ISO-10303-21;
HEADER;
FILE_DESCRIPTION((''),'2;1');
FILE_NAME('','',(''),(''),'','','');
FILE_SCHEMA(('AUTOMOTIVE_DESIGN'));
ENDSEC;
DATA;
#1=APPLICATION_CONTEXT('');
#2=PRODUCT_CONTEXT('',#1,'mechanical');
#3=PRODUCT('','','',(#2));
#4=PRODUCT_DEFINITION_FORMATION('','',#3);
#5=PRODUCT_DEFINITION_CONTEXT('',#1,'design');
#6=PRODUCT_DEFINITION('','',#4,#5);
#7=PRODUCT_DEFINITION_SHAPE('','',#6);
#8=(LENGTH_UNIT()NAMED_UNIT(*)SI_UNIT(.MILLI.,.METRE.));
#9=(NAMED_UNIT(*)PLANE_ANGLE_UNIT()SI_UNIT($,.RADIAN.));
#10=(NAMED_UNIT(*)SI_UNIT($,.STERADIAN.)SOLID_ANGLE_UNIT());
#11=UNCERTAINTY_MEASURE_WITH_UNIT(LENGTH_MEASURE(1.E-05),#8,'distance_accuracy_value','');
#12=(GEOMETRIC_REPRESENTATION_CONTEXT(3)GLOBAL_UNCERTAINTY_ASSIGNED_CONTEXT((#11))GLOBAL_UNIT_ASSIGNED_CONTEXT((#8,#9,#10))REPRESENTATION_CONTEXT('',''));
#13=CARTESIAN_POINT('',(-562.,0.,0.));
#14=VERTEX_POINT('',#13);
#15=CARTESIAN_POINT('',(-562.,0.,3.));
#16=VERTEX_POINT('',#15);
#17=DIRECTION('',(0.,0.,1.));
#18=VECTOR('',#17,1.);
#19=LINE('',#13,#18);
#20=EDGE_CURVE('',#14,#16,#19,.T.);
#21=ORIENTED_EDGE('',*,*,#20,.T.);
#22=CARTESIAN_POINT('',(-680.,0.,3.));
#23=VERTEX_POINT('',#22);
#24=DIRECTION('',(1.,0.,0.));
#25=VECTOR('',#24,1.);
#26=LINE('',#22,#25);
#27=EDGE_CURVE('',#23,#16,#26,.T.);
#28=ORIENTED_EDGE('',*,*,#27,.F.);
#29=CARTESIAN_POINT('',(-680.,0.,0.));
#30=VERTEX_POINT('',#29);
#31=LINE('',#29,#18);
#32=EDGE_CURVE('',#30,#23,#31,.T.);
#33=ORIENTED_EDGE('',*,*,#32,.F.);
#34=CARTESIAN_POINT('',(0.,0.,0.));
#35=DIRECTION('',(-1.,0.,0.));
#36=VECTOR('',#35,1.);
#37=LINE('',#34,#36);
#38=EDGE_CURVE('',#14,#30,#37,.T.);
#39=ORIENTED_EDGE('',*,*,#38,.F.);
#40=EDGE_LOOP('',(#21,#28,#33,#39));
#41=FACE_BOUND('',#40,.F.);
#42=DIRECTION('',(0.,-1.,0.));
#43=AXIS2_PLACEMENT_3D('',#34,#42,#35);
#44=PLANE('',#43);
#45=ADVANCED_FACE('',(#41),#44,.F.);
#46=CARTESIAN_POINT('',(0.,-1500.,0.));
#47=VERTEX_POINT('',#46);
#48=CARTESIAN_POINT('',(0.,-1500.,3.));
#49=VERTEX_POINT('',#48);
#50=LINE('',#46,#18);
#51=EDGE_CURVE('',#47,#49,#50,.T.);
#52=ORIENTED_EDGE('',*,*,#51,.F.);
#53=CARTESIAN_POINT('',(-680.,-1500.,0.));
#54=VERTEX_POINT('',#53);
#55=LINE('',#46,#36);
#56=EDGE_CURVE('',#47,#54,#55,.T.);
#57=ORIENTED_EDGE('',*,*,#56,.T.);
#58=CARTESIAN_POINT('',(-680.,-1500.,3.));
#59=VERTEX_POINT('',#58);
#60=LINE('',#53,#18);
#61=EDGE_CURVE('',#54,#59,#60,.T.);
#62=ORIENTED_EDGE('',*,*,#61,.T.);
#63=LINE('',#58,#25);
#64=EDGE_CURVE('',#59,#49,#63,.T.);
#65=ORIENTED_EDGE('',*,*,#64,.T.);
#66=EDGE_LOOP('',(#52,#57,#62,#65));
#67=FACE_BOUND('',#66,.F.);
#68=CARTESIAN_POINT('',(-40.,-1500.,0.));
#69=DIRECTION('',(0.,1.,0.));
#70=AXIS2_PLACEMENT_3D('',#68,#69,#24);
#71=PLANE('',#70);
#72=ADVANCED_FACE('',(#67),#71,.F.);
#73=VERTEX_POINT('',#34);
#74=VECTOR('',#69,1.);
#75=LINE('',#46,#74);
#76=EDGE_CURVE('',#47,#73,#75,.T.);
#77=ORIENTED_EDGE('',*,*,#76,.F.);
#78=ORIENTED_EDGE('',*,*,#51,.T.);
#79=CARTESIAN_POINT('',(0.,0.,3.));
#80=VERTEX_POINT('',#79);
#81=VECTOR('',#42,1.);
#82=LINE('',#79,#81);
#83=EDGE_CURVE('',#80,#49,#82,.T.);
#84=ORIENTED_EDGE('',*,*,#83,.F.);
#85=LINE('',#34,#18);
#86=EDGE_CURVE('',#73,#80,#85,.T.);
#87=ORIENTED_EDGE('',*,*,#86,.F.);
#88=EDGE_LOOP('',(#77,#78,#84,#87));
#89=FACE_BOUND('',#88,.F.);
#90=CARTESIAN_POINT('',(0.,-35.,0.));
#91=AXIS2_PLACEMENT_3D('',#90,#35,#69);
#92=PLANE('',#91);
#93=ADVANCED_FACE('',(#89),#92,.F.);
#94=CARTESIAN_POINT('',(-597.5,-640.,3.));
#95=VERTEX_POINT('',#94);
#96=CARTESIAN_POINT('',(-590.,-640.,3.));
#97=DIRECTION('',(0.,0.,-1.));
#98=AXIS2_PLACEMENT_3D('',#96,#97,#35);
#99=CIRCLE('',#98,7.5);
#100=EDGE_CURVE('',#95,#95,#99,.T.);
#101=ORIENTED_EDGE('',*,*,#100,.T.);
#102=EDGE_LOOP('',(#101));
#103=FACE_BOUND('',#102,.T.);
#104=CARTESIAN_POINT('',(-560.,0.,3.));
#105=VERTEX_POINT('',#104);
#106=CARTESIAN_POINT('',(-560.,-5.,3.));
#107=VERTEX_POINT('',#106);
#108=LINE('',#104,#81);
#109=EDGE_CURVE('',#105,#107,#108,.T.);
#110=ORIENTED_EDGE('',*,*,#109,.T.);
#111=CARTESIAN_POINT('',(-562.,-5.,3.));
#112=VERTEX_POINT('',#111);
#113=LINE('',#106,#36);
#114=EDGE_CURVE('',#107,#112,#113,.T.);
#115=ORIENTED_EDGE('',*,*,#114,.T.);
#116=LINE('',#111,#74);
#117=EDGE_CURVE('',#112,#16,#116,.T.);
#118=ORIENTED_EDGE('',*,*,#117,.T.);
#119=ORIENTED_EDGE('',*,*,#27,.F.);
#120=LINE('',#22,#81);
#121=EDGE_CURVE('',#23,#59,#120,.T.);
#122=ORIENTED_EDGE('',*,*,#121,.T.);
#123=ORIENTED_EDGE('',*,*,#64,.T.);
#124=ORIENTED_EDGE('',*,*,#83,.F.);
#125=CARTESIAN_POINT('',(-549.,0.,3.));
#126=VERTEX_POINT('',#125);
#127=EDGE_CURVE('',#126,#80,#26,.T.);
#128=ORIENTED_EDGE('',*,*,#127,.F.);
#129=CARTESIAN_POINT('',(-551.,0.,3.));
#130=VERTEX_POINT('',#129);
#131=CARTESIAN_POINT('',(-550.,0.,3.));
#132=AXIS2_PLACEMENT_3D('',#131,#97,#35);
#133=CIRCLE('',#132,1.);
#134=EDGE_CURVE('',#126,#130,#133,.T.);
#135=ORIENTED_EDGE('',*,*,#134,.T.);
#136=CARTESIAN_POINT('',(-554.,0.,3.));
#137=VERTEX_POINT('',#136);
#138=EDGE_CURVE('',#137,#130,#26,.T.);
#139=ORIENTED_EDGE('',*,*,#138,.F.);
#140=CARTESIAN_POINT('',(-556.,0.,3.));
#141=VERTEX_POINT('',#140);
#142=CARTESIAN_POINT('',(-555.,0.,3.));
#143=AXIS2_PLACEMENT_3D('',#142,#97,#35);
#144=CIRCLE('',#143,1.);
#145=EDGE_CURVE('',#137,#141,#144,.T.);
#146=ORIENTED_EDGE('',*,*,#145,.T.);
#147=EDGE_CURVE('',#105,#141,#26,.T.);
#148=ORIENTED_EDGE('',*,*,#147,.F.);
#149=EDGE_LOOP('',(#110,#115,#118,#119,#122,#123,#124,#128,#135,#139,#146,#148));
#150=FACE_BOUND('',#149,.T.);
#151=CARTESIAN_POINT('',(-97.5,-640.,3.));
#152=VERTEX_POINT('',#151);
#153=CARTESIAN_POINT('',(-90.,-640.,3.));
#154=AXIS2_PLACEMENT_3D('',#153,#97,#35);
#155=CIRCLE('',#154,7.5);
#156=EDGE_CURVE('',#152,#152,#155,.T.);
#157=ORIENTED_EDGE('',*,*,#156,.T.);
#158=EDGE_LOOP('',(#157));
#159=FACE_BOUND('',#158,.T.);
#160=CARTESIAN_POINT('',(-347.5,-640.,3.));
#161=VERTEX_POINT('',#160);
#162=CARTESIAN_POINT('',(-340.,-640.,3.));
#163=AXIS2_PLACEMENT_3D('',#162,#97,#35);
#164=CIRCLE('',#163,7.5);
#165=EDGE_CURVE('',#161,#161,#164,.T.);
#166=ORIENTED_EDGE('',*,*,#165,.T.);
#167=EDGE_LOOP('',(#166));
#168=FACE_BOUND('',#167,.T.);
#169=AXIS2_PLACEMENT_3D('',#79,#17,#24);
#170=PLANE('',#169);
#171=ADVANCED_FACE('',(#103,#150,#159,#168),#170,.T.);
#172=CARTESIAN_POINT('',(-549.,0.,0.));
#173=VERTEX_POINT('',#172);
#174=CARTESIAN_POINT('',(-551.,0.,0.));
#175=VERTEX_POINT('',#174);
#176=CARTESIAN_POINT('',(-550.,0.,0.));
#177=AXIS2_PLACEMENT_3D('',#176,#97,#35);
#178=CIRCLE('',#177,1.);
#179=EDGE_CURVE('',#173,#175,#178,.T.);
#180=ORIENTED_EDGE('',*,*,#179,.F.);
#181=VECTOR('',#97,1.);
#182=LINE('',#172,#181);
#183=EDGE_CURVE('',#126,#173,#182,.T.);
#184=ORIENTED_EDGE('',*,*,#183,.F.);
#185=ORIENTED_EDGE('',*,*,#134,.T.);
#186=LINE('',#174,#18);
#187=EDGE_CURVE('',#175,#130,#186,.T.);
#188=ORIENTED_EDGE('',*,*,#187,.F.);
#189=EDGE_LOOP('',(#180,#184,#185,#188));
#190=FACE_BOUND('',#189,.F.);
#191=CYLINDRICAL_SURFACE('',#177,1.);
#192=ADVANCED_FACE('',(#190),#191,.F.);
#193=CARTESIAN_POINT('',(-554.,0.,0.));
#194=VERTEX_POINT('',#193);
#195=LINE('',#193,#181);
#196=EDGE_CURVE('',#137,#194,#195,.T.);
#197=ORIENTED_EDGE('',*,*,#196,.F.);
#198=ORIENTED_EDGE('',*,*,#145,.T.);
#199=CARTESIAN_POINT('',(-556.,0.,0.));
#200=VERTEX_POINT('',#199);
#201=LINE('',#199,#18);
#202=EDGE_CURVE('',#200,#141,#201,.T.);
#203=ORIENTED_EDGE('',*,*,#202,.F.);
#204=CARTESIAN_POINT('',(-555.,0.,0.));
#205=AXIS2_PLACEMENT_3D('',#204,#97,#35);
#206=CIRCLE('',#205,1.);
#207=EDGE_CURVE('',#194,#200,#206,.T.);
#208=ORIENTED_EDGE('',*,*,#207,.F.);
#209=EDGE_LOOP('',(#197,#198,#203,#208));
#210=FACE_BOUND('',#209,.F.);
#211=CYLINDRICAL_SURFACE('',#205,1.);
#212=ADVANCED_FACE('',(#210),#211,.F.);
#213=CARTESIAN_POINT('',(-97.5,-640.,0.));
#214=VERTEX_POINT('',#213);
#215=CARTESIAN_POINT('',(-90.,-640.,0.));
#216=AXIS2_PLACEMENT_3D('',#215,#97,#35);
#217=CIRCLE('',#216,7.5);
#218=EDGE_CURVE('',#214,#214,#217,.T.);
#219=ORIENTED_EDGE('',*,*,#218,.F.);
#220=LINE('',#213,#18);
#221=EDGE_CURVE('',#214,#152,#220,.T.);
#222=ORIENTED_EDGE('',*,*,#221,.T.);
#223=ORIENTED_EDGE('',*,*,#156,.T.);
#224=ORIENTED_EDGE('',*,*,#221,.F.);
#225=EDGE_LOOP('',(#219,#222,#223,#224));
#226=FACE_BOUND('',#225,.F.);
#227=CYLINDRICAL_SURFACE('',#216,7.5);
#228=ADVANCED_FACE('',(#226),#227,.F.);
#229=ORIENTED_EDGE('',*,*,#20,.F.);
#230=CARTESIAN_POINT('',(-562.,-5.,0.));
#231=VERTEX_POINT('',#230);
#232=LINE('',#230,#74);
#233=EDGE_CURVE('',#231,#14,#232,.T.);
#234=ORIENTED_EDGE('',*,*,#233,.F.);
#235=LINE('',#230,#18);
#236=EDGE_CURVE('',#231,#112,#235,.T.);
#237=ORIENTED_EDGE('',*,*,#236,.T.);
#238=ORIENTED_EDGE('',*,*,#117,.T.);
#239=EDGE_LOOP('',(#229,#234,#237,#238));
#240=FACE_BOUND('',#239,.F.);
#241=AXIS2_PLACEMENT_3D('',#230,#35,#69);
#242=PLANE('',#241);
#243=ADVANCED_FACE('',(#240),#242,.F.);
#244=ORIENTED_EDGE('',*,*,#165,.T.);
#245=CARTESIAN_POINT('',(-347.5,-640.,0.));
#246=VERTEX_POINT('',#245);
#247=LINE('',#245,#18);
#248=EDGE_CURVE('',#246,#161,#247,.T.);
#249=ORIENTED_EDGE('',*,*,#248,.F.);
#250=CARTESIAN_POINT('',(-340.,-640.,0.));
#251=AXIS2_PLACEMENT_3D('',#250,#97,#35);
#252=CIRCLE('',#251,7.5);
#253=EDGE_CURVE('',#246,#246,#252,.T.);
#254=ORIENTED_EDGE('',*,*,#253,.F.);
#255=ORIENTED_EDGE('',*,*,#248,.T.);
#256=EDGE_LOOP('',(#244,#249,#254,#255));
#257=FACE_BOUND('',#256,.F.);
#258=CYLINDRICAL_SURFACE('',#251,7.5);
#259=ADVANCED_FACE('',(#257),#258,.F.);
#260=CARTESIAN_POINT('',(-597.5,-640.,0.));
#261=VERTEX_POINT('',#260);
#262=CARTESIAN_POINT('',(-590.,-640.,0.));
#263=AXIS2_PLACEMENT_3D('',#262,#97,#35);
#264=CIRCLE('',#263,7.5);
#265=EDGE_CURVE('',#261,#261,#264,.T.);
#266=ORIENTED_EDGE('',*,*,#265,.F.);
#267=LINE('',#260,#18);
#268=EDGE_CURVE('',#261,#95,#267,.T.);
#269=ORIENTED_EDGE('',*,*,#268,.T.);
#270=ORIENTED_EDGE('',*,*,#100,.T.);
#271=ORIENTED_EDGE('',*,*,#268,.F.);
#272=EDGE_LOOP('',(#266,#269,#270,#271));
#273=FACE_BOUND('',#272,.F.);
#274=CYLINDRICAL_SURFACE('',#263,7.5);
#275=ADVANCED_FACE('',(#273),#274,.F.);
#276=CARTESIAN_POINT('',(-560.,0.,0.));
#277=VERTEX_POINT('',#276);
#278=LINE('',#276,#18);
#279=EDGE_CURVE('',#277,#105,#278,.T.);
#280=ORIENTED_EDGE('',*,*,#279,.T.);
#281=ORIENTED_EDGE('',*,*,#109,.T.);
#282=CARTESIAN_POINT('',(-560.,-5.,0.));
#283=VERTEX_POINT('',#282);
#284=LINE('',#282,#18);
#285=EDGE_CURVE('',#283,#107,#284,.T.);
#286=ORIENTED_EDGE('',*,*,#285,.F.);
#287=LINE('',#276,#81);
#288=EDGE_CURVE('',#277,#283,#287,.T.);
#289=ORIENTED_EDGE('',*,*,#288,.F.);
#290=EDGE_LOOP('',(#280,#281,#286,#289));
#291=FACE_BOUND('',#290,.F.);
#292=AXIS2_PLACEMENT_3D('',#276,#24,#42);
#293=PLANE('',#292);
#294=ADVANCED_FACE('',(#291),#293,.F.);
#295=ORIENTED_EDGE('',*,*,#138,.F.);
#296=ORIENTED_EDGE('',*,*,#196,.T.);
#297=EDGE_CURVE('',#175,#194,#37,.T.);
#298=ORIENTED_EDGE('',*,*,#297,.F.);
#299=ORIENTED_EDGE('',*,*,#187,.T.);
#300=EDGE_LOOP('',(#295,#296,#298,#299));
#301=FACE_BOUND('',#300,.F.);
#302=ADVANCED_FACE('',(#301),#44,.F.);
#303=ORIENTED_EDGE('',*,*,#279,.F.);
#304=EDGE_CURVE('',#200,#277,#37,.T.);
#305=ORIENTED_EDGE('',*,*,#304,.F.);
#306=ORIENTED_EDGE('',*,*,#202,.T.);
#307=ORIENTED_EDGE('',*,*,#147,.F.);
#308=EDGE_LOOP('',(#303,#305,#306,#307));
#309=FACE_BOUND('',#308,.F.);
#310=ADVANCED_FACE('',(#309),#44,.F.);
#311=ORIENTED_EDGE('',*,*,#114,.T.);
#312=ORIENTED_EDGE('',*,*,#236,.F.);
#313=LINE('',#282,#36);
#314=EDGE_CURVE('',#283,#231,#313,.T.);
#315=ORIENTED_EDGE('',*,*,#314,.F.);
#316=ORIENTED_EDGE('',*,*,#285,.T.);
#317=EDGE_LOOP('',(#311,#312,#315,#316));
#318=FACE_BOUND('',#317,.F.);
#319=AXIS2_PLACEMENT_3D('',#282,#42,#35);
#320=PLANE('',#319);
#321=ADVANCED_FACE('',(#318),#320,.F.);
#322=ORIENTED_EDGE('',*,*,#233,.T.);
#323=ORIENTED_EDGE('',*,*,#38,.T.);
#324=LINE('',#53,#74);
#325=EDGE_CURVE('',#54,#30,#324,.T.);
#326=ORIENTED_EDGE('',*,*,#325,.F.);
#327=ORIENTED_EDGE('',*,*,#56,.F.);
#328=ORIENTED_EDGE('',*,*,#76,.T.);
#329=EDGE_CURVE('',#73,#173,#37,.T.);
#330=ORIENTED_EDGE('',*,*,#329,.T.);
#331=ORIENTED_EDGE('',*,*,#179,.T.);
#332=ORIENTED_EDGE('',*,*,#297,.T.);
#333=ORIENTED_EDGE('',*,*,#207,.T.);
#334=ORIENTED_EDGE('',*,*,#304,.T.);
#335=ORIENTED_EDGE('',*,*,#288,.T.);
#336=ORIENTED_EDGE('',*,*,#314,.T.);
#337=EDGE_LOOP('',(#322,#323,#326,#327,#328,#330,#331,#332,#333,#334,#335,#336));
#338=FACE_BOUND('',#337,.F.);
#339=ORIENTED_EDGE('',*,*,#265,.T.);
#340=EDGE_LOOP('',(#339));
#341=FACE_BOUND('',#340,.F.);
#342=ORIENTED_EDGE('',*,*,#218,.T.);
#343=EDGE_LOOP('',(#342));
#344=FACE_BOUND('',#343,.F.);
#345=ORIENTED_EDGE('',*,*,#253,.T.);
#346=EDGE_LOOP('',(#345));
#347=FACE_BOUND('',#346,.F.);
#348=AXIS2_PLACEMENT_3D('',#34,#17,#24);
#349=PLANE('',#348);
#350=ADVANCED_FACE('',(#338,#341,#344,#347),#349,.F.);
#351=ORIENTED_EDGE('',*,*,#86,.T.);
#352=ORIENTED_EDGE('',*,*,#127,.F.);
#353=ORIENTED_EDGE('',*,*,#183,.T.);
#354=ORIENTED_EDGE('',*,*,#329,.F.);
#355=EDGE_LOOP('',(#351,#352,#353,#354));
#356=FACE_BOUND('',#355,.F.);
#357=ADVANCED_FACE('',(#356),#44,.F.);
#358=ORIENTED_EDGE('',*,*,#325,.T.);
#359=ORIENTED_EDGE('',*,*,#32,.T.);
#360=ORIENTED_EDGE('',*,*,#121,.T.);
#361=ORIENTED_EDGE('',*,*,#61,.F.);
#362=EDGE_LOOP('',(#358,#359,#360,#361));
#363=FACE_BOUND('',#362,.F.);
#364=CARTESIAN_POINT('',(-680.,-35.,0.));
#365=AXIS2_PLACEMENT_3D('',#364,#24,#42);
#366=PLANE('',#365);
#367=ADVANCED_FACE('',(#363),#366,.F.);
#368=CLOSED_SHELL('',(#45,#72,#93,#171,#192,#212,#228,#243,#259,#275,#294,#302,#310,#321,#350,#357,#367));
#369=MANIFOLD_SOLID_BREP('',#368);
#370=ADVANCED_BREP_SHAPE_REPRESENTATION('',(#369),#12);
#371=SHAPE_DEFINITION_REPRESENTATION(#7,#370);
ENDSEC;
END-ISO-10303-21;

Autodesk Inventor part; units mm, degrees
ref_plane "YZ Plane" through (0, 0, 0) normal (1, 0, 0) x (0, 1, 0)
ref_plane "XZ Plane" through (0, 0, 0) normal (0, 1, 0) x (-1, 0, 0)
ref_plane "XY Plane" through (0, 0, 0) normal (0, 0, 1) x (1, 0, 0)
sketch "Sketch1" plane through (0, 0, 0) normal (0, 0, 1) x (1, 0, 0)
  line L0 (0, 0) -> (-680, 0)
  line L1 (-680, 0) -> (-680, -1500)
  line L2 (-680, -1500) -> (0, -1500)
  line L3 (0, -1500) -> (0, 0)
  line L4 (0, 0) -> (-40, 0)
  line L5 (-40, 0) -> (-40, -35)
  line L6 (-40, -35) -> (0, -35)
  line L7 (0, -35) -> (0, 0)
  line L8 (0, -1500) -> (-40, -1500)
  line L9 (-40, -1500) -> (-40, -1465)
  line L10 (-40, -1465) -> (0, -1465)
  line L11 (0, -1465) -> (0, -1500)
  line L12 (-680, 0) -> (-640, 0)
  line L13 (-640, 0) -> (-640, -35)
  line L14 (-640, -35) -> (-680, -35)
  line L15 (-680, -35) -> (-680, 0)
  line L16 (-680, -1500) -> (-640, -1500)
  line L17 (-640, -1500) -> (-640, -1465)
  line L18 (-640, -1465) -> (-680, -1465)
  line L19 (-680, -1465) -> (-680, -1500)
  line L20 (-240, -1500) -> (-140, -1500)
  line L21 (-140, -1500) -> (-140, -1465)
  line L22 (-140, -1465) -> (-240, -1465)
  line L23 (-240, -1465) -> (-240, -1500)
  line L24 (-240, 0) -> (-140, 0)
  line L25 (-140, 0) -> (-140, -35)
  line L26 (-140, -35) -> (-240, -35)
  line L27 (-240, -35) -> (-240, 0)
  point P0 (0, -35)
  point P1 (-40, 0)
  point P2 (-40, -1500)
  point P3 (0, -1465)
  point P4 (-140, -1500)
  point P5 (-140, 0)
  point P6 (-640, 0)
  point P7 (-680, -35)
  point P8 (-300, -35)
  point P9 (-300, 0)
  point P10 (-260, -2265)
  point P11 (-260, -2300)
  point P12 (-260, -35)
  point P13 (-260, 0)
  point P14 (-300, -2265)
  point P15 (-300, -2300)
  point P16 (-240, 0)
  dimension "d22" = 680
  dimension "d23" = 1500
  dimension "d24" = 40
  dimension "d25" = 35
  dimension "d28" = 100
  dimension "d29" = 100
extrude "Plate1" add sketch "Sketch1" along normal blind 3
sketch "Sketch5" plane through (0, 0, 0) normal (0, 0, -1) x (-1, 0, 0)
  line L0 (680, 0) -> (580, 0) construction
  line L1 (580, 0) -> (580, -2) construction
  line L2 (580, -2) -> (680, -2) construction
  line L3 (680, -2) -> (680, 0) construction
  line L4 (580, 0) -> (578.4752, -4.6556)
  arc A0 (577.5248, -4.6556) -> (578.4752, -4.6556) centre (578, -4.5) ccw
  line L5 (577.5248, -4.6556) -> (576, 0)
  line L6 (576, 0) -> (580, 0)
  line L7 (576, 0) -> (574, 0) construction
  line L8 (574, 0) -> (572, 0)
  line L9 (572, 0) -> (572, -5)
  line L10 (572, -5) -> (574, -5)
  line L11 (574, -5) -> (574, 0)
  line L12 (572, 0) -> (570, 0) construction
  line L13 (570, 0) -> (568, 0)
  line L14 (568, 0) -> (568, -5)
  line L15 (568, -5) -> (570, -5)
  line L16 (570, -5) -> (570, 0)
  line L17 (568, 0) -> (566, 0) construction
  line L18 (566, 0) -> (564, 0)
  line L19 (564, 0) -> (564, -5)
  line L20 (564, -5) -> (566, -5)
  line L21 (566, -5) -> (566, 0)
  line L22 (564, 0) -> (562, 0) construction
  line L23 (562, 0) -> (560, 0)
  line L24 (560, 0) -> (560, -5)
  line L25 (560, -5) -> (562, -5)
  line L26 (562, -5) -> (562, 0)
  line L27 (560, 0) -> (555, 0) construction
  line L28 (555, 0) -> (550, 0) construction
  circle A1 centre (555, 0) radius 1
  circle A2 centre (550, 0) radius 1
  point P0 (0, 0)
  point P1 (578, 0)
  dimension "d30" = 100
  dimension "d31" = 2
  dimension "d32" = 5
  dimension "d33" = 4
  dimension "d34" = 0.5
  dimension "d35" = 5
  dimension "d36" = 5
  dimension "d37" = 5
  dimension "d38" = 2
extrude "Cut1" cut sketch "Sketch5" against normal blind 3 contours L26 L25 L24 L23 | A1 | A2
sketch "Sketch6" plane through (0, 0, 0) normal (0, 0, -1) x (-1, 0, 0)
  circle A0 centre (340, -640) radius 7.5
  arc A1 (549, 0) -> (551, 0) centre (550, 0) ccw projected
  line L0 (554, 0) -> (551, 0) projected
  arc A2 (554, 0) -> (556, 0) centre (555, 0) ccw projected
  line L1 (560, 0) -> (556, 0) projected
  line L2 (560, 0) -> (560, -5) projected
  line L3 (560, -5) -> (562, -5) projected
  line L4 (562, -5) -> (562, 0) projected
  line L5 (680, 0) -> (562, 0) projected
  line L6 (680, -1500) -> (680, 0) projected
  line L7 (0, -1500) -> (680, -1500) projected
  line L8 (0, 0) -> (0, -1500) projected
  line L9 (549, 0) -> (0, 0) projected
  point P0 (340, -1500)
  dimension "d43" = 15
  dimension "d44" = 860
extrude "Cut2" cut sketch "Sketch6" against normal blind 3 contours A0
pattern_linear "Rectangular Pattern1" count 3 spacing 250 along (1, 0, 0) of "Cut2" first direction both ways yes
equation "\"d33\" = 2 * d31"
equation "\"d34\" = 0.25 * d31"
equation "\"d38\" = d31"
equation "\"d39\" = Thickness"
equation "\"d41\" = Thickness"
equation "\"d2\" = Thickness"
equation "\"BendReliefWidth\" = Thickness"
equation "\"BendReliefDepth\" = 0.5 * Thickness"
equation "\"CornerReliefSize\" = 4 * Thickness"
equation "\"MinimumRemnant\" = 2 * Thickness"
equation "\"TransitionRadius\" = BendRadius"
equation "\"JacobiRadiusSize\" = BendRadius"
equation "\"GapSize\" = Thickness"
equation "\"Thickness\" = 3"
equation "\"BendRadius\" = 5"
properties part number "GnG X.6 floor sheet" material "Stainless Steel"
